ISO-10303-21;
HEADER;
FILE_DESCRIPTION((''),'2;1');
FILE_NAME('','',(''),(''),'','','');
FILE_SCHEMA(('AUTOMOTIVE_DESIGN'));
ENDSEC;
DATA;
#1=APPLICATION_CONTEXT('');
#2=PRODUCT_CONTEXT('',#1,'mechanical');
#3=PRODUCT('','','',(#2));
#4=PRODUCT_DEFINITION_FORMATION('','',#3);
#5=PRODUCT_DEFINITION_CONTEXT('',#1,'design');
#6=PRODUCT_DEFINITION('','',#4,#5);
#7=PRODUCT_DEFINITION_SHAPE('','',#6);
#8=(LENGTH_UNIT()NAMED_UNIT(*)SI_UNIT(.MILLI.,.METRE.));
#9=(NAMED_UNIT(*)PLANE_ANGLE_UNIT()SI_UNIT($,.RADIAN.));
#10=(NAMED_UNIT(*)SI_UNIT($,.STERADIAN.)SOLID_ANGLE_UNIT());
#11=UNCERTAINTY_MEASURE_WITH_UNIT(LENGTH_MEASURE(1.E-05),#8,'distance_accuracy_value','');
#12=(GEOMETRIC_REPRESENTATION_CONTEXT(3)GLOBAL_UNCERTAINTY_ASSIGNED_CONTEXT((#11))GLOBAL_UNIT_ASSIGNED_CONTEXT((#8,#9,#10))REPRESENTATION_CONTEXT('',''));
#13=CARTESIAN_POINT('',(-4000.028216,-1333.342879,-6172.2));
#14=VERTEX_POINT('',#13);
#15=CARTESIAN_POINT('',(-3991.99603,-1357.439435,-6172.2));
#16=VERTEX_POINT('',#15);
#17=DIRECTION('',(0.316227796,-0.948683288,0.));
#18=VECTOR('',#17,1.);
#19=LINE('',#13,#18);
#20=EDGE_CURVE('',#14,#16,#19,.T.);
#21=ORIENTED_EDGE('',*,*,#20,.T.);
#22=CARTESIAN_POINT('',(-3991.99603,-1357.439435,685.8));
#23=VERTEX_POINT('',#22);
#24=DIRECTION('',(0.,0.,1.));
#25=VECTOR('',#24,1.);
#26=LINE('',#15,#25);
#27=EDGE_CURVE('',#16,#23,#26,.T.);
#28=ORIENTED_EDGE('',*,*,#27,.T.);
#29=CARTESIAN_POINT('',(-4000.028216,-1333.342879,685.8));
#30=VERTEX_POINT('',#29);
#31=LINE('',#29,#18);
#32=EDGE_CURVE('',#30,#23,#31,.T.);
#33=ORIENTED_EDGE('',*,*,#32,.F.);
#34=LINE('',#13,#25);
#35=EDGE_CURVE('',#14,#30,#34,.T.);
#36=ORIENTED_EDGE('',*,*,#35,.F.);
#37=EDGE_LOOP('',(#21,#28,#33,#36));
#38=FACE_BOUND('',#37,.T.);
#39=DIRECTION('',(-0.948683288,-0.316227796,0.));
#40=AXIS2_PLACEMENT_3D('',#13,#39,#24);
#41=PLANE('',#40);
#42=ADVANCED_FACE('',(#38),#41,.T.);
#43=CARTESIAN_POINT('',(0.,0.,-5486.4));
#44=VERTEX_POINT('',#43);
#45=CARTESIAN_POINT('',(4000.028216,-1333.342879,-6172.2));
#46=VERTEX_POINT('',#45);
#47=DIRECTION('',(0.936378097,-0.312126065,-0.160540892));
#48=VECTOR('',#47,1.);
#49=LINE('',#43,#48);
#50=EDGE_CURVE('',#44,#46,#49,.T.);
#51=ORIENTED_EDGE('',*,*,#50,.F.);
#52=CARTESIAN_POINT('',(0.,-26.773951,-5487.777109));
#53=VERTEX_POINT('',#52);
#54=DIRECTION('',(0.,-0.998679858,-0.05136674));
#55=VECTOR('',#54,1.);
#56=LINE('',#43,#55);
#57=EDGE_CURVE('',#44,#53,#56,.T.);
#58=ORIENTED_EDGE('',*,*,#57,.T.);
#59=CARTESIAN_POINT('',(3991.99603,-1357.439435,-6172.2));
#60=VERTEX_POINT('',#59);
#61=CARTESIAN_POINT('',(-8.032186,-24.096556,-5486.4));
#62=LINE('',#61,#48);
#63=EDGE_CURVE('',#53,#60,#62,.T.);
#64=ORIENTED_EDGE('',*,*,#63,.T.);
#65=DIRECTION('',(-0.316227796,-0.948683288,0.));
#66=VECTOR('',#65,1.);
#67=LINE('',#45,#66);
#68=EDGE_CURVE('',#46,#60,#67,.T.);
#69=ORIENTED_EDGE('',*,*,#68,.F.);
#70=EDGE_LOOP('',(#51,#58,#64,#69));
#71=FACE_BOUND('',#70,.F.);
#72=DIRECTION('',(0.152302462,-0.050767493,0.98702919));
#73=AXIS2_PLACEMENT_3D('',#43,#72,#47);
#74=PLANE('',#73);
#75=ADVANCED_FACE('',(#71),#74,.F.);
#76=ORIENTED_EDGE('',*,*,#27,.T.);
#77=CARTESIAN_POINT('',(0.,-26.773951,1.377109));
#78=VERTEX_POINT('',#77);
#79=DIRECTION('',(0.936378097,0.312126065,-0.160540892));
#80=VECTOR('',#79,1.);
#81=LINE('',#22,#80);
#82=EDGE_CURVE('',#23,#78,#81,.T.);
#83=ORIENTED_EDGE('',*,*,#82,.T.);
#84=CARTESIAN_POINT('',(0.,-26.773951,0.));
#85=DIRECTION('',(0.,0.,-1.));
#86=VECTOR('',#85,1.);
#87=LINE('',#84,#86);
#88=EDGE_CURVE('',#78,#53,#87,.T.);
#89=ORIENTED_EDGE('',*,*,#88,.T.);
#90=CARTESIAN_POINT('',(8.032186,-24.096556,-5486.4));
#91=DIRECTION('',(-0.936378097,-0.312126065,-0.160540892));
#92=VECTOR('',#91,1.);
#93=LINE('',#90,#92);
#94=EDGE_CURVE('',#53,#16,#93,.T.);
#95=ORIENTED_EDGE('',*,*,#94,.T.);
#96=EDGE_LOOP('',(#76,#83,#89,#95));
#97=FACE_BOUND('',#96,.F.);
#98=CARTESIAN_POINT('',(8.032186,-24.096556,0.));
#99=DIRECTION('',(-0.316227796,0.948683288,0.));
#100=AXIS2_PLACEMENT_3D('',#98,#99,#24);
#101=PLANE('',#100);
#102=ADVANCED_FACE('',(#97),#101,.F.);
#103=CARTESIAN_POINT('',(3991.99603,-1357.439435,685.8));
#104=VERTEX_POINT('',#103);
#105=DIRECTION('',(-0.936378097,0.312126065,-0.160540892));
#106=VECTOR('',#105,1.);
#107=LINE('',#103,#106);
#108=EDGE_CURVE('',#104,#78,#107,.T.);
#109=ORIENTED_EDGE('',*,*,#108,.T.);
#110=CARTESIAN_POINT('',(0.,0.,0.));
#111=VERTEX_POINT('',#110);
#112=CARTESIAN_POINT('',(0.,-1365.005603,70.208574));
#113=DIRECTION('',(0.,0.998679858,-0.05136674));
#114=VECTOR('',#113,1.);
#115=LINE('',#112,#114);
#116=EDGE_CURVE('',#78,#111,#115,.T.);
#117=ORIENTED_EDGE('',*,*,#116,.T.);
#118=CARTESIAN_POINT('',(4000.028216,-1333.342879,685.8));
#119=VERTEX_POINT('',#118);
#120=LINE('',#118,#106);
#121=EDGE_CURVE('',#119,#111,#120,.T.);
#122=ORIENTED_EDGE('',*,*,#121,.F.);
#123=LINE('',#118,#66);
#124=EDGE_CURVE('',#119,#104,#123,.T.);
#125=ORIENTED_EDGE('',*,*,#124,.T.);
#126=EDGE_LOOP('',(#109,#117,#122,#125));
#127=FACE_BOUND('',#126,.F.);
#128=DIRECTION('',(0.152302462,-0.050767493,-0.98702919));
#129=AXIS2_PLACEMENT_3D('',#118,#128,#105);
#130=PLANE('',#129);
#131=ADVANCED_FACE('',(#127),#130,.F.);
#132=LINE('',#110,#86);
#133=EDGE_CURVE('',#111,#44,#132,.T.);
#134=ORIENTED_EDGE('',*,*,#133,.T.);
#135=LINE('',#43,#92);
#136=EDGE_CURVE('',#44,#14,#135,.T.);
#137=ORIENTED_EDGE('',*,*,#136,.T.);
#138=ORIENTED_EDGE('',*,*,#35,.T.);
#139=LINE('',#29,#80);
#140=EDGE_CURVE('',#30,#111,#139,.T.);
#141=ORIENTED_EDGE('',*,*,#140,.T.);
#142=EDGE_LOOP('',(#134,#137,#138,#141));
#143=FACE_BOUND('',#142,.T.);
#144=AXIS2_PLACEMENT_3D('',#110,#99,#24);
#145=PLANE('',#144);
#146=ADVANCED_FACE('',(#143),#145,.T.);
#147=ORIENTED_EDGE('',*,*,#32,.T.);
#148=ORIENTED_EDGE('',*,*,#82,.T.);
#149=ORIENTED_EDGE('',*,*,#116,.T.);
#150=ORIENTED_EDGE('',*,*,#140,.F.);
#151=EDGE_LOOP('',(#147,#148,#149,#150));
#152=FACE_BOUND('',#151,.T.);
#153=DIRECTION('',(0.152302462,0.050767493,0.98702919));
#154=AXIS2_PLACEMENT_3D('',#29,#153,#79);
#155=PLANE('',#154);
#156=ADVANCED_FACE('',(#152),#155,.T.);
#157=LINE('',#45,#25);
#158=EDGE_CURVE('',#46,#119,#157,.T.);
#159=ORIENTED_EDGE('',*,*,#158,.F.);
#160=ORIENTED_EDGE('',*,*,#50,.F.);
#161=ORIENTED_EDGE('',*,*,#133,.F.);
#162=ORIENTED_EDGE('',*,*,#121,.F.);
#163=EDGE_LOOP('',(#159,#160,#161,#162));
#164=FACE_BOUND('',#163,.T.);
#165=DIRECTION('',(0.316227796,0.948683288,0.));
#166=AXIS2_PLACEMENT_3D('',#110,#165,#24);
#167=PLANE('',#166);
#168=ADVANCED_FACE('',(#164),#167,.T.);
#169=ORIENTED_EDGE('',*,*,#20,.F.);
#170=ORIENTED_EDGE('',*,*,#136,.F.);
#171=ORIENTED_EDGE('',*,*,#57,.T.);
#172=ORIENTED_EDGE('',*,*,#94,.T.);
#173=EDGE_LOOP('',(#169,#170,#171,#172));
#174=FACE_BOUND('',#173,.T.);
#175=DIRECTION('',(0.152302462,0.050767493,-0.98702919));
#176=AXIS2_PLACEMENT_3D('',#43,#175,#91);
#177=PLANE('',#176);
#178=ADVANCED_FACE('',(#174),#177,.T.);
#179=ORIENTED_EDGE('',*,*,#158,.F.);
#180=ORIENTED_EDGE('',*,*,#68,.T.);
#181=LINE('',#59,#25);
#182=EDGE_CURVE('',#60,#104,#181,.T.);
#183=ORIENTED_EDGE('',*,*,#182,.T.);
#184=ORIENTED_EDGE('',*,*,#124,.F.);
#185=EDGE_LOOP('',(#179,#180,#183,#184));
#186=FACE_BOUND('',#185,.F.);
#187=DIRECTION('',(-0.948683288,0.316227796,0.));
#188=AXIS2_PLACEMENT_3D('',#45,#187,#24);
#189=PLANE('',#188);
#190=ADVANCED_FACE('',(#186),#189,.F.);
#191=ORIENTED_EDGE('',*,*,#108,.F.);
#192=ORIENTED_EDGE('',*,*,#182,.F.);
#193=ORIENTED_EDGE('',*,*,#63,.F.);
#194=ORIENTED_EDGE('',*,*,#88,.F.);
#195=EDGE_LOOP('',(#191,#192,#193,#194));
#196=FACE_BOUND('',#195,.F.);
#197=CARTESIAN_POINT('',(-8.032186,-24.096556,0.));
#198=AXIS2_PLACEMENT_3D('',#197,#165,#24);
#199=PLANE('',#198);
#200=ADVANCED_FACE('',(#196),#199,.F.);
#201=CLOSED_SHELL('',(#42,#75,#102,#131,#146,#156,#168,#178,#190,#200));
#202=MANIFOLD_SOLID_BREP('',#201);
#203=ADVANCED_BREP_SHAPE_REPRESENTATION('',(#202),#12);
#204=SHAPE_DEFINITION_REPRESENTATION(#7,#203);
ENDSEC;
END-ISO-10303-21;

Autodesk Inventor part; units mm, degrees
ref_plane "YZ Plane" through (0, 0, 0) normal (1, 0, 0) x (0, 1, 0)
ref_plane "Work Plane3" through (0, 0, 0) normal (-0.3162278, 0.9486833, 0) x (0, 0, 1)
sketch "Sketch5" plane through (0, 0, 0) normal (-0.3162278, 0.9486833, 0) x (0, 0, 1)
  line L0 (0, 0) -> (-5486.4, 0)
  line L1 (-5486.4, 0) -> (-6172.2, -4216.4)
  line L2 (-6172.2, -4216.4) -> (685.8, -4216.4)
  line L3 (685.8, -4216.4) -> (0, 0)
  line L4 (-7543.8, 0) -> (2057.4, 0) projected
  dimension "d14" = 5486.4
  dimension "d15" = 4216.4
  dimension "d18" = 6858
ref_plane "Work Plane4" through (0, 0, 0) normal (0.3162278, 0.9486833, 0) x (0, 0, 1)
sketch "Sketch6" plane through (0, 0, 0) normal (0.3162278, 0.9486833, 0) x (0, 0, 1)
  line L0 (0, 0) -> (-5486.4, 0)
  line L1 (-5486.4, 0) -> (-6172.2, 4216.4)
  line L2 (-6172.2, 4216.4) -> (685.8, 4216.4)
  line L3 (685.8, 4216.4) -> (0, 0)
  dimension "d20" = 5486.4
  dimension "d21" = 6858
  dimension "d22" = 4216.4
extrude "Extrusion3" add sketch "Sketch5" against normal blind 25.4
extrude "Extrusion4" add sketch "Sketch6" against normal blind 25.4
equation "\"d14\" = dormerRidgeLineLength"
equation "\"d15\" = dormerRidgeToGarageEave"
equation "\"d18\" = dormerGarageEaveLength"
equation "\"d20\" = dormerRidgeLineLength"
equation "\"d21\" = dormerPoolEaveLength"
equation "\"d22\" = dormerRidgeToPoolEave"
equation "\"pitch_6_12\" = 26.565deg"
equation "\"d11\" = pitch_4_12"
equation "\"pitch_4_12\" = 18.434949deg"
equation "\"dormerRidgeLineLength\" = 5486.4"
equation "\"dormerPoolEaveLength\" = 6858"
equation "\"dormerGarageEaveLength\" = 6858"
equation "\"dormerRidgeToGarageEave\" = 4216.4"
equation "\"d19\" = -pitch_4_12"
equation "\"dormerRidgeToPoolEave\" = 4216.4"
properties part number "houseDormerRoofV2"
